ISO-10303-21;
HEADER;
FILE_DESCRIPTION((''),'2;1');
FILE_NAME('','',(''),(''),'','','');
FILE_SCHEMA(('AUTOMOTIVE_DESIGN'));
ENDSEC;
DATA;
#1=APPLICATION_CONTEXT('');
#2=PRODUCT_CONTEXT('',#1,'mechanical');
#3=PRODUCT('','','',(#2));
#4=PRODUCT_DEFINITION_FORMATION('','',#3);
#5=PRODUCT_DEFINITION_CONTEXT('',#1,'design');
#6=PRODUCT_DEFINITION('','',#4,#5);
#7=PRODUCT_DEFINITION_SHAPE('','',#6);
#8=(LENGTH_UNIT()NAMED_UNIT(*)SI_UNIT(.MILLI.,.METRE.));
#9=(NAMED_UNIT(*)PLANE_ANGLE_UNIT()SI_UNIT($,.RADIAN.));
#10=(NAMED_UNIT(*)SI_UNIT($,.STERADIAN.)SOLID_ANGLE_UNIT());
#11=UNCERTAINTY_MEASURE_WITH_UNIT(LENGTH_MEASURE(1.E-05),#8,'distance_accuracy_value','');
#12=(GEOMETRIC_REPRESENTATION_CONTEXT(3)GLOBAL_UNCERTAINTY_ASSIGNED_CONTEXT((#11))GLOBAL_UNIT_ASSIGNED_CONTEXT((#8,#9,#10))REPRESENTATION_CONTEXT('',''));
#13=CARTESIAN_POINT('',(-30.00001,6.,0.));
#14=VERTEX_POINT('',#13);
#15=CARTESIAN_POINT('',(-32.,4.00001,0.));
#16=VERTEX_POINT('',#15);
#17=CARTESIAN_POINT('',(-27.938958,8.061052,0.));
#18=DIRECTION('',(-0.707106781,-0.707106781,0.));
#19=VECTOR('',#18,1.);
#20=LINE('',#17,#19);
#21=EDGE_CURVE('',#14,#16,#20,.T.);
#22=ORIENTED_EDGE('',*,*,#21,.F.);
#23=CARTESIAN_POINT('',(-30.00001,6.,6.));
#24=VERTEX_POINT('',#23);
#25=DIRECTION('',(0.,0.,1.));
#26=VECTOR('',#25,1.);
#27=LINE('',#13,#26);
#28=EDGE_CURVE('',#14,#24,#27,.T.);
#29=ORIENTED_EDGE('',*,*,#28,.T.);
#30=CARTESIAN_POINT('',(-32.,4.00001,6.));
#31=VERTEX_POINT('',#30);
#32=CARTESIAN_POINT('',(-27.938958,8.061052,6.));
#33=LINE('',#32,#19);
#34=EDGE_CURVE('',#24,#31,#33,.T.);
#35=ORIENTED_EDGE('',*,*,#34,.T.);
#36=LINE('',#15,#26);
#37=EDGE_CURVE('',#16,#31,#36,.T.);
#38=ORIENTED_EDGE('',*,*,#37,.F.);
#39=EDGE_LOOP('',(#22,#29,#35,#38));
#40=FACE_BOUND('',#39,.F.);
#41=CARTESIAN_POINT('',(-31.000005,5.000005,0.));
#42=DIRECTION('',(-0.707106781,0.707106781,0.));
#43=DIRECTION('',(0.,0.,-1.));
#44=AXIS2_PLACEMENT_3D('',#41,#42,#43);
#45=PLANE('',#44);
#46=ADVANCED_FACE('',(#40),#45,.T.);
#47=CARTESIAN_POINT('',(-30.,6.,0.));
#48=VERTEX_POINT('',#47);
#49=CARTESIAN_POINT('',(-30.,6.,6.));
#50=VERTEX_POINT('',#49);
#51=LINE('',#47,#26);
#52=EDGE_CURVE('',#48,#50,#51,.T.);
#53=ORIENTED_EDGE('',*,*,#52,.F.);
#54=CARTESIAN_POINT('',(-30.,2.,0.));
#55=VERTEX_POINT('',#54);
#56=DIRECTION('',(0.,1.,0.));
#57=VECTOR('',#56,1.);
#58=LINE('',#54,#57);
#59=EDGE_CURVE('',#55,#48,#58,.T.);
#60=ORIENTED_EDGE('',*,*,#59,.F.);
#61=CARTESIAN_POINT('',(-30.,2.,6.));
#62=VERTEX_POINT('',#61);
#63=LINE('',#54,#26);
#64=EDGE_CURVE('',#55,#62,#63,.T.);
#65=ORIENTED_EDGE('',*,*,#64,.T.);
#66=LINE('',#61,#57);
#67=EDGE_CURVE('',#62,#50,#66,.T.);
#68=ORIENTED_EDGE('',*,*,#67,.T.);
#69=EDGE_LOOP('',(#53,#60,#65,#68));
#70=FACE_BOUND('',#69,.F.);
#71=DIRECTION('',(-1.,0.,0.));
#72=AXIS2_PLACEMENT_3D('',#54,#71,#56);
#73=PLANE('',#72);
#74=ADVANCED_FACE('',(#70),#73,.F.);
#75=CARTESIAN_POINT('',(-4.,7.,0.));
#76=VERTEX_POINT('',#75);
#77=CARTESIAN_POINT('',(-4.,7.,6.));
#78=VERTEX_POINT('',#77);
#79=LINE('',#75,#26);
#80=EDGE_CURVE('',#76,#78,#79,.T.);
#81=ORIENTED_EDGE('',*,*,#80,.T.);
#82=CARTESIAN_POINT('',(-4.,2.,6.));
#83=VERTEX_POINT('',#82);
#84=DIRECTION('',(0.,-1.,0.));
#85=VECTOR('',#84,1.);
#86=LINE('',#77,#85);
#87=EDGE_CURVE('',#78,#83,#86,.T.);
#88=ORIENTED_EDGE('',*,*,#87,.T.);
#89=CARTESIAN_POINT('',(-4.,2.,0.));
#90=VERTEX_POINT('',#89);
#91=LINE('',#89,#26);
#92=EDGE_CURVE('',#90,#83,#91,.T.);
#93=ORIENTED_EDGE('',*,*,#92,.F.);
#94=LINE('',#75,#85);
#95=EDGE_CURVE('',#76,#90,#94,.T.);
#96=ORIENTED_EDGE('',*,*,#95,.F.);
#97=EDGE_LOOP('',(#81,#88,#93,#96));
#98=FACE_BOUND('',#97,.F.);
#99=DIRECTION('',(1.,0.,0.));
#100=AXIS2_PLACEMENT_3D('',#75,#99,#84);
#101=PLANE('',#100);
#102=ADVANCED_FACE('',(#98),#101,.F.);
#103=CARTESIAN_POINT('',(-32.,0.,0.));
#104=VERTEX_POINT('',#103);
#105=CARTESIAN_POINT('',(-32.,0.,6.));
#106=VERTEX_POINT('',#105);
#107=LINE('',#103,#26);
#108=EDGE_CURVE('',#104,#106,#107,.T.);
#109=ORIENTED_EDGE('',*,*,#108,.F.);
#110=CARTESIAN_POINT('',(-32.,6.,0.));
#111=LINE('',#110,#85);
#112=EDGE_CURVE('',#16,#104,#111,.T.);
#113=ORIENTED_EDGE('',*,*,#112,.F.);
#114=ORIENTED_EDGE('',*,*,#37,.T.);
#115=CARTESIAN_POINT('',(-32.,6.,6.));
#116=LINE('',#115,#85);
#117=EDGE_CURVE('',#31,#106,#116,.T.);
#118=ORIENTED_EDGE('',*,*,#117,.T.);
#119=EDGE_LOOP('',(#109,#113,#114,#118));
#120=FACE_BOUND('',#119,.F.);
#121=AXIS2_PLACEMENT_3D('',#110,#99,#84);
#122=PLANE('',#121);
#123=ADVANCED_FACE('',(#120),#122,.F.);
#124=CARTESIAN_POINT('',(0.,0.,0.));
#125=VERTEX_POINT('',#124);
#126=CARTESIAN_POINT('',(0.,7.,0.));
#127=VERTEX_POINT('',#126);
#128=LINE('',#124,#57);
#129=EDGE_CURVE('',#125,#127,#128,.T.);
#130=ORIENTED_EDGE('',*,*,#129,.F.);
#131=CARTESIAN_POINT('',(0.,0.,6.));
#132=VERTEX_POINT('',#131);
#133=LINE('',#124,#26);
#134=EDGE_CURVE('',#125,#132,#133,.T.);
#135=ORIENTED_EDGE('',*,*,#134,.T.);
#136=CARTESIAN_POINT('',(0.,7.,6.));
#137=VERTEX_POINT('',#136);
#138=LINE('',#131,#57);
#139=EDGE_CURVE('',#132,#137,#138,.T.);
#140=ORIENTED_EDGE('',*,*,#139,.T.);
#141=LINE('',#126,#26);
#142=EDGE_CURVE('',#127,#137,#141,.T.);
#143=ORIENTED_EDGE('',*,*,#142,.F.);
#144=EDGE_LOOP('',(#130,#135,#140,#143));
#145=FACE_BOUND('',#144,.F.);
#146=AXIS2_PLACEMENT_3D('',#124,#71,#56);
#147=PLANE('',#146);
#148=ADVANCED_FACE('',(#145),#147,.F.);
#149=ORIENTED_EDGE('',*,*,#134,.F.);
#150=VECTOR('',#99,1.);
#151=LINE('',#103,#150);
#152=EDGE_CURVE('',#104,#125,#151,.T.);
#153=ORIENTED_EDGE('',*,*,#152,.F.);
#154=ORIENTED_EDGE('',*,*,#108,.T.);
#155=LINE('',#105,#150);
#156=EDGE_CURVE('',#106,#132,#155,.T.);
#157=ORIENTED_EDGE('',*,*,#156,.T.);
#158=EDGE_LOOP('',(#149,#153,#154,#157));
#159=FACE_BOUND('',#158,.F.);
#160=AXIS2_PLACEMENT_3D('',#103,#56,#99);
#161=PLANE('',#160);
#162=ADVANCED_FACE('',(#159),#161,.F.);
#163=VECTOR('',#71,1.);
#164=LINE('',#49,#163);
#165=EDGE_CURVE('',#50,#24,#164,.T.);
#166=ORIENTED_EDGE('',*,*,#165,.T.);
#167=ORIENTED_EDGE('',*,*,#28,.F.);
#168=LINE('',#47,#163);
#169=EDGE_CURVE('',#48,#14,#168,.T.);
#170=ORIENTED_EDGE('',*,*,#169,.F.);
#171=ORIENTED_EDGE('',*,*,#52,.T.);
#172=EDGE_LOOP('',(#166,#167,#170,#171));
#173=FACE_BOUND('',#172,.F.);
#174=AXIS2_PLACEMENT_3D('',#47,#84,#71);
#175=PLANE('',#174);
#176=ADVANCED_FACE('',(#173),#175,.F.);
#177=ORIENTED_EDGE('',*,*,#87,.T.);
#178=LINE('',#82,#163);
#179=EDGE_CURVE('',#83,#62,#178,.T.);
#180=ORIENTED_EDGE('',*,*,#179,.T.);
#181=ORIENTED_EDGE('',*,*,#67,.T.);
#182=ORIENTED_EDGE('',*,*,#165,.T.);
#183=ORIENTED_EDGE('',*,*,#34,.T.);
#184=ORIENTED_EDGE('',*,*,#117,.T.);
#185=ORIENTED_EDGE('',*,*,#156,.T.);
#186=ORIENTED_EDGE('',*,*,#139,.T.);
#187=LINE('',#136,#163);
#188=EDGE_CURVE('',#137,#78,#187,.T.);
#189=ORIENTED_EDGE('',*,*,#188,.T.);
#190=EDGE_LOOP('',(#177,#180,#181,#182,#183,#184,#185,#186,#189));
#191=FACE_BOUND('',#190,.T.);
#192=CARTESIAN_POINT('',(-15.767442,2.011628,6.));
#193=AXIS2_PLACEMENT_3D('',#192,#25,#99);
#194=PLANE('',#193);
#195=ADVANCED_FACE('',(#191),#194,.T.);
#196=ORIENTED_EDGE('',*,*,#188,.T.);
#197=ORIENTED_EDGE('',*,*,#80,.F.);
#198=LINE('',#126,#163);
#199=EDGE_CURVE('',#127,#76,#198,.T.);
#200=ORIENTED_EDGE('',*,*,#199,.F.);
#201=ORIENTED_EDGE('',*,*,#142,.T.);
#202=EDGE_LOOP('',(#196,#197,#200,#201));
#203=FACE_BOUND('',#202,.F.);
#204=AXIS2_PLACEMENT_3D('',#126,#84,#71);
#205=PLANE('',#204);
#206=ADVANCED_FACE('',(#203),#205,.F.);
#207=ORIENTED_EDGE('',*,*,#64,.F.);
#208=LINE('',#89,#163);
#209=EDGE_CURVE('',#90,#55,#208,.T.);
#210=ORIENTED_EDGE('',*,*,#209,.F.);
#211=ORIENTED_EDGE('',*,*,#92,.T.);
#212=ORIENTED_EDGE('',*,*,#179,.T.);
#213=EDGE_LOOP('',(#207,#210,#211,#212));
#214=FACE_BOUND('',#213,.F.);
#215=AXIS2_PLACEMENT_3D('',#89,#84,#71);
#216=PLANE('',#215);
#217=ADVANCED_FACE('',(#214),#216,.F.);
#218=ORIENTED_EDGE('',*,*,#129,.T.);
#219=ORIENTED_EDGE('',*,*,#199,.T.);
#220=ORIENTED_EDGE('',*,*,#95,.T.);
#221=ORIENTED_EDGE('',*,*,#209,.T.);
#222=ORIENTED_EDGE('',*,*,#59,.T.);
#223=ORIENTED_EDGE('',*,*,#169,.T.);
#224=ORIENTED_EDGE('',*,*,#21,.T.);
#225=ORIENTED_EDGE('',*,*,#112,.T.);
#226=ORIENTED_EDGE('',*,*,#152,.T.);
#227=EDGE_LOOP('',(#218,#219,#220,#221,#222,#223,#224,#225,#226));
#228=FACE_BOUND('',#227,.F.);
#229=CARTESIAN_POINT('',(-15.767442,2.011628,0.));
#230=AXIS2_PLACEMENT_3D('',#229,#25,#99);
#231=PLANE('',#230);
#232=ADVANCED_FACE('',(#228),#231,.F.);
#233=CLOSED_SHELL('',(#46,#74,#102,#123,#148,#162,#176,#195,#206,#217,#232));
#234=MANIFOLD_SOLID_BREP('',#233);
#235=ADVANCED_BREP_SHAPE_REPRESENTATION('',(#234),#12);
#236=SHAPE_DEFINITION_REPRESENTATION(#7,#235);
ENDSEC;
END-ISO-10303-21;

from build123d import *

# Parameters (mm, degrees)
F1_DEPTH = 6
F2_SIZE  = 1.99999


# Not quite as in the source:
# - a fillet or chamfer is up to 0.001 mm smaller than in the source, because OpenCascade refuses the exact size


with BuildPart() as f1:
    # F0 (on Top) → F1 (new body)
    with BuildSketch(Plane.XY):
        Polygon((-4, 7), (-4, 2), (-30, 2), (-30, 6), (-32, 6), (-32, 0), (0, 0), (0, 7), align=None)
    extrude(amount=F1_DEPTH)

    # F2 (size 2 in the source; OpenCascade refuses exactly that, so slightly less here)
    f2_edges = [f1.edges().sort_by_distance(p)[0] for p in [
        (-32, 6, 3),
    ]]
    chamfer(f2_edges, length=F2_SIZE)


solid = f1.part
